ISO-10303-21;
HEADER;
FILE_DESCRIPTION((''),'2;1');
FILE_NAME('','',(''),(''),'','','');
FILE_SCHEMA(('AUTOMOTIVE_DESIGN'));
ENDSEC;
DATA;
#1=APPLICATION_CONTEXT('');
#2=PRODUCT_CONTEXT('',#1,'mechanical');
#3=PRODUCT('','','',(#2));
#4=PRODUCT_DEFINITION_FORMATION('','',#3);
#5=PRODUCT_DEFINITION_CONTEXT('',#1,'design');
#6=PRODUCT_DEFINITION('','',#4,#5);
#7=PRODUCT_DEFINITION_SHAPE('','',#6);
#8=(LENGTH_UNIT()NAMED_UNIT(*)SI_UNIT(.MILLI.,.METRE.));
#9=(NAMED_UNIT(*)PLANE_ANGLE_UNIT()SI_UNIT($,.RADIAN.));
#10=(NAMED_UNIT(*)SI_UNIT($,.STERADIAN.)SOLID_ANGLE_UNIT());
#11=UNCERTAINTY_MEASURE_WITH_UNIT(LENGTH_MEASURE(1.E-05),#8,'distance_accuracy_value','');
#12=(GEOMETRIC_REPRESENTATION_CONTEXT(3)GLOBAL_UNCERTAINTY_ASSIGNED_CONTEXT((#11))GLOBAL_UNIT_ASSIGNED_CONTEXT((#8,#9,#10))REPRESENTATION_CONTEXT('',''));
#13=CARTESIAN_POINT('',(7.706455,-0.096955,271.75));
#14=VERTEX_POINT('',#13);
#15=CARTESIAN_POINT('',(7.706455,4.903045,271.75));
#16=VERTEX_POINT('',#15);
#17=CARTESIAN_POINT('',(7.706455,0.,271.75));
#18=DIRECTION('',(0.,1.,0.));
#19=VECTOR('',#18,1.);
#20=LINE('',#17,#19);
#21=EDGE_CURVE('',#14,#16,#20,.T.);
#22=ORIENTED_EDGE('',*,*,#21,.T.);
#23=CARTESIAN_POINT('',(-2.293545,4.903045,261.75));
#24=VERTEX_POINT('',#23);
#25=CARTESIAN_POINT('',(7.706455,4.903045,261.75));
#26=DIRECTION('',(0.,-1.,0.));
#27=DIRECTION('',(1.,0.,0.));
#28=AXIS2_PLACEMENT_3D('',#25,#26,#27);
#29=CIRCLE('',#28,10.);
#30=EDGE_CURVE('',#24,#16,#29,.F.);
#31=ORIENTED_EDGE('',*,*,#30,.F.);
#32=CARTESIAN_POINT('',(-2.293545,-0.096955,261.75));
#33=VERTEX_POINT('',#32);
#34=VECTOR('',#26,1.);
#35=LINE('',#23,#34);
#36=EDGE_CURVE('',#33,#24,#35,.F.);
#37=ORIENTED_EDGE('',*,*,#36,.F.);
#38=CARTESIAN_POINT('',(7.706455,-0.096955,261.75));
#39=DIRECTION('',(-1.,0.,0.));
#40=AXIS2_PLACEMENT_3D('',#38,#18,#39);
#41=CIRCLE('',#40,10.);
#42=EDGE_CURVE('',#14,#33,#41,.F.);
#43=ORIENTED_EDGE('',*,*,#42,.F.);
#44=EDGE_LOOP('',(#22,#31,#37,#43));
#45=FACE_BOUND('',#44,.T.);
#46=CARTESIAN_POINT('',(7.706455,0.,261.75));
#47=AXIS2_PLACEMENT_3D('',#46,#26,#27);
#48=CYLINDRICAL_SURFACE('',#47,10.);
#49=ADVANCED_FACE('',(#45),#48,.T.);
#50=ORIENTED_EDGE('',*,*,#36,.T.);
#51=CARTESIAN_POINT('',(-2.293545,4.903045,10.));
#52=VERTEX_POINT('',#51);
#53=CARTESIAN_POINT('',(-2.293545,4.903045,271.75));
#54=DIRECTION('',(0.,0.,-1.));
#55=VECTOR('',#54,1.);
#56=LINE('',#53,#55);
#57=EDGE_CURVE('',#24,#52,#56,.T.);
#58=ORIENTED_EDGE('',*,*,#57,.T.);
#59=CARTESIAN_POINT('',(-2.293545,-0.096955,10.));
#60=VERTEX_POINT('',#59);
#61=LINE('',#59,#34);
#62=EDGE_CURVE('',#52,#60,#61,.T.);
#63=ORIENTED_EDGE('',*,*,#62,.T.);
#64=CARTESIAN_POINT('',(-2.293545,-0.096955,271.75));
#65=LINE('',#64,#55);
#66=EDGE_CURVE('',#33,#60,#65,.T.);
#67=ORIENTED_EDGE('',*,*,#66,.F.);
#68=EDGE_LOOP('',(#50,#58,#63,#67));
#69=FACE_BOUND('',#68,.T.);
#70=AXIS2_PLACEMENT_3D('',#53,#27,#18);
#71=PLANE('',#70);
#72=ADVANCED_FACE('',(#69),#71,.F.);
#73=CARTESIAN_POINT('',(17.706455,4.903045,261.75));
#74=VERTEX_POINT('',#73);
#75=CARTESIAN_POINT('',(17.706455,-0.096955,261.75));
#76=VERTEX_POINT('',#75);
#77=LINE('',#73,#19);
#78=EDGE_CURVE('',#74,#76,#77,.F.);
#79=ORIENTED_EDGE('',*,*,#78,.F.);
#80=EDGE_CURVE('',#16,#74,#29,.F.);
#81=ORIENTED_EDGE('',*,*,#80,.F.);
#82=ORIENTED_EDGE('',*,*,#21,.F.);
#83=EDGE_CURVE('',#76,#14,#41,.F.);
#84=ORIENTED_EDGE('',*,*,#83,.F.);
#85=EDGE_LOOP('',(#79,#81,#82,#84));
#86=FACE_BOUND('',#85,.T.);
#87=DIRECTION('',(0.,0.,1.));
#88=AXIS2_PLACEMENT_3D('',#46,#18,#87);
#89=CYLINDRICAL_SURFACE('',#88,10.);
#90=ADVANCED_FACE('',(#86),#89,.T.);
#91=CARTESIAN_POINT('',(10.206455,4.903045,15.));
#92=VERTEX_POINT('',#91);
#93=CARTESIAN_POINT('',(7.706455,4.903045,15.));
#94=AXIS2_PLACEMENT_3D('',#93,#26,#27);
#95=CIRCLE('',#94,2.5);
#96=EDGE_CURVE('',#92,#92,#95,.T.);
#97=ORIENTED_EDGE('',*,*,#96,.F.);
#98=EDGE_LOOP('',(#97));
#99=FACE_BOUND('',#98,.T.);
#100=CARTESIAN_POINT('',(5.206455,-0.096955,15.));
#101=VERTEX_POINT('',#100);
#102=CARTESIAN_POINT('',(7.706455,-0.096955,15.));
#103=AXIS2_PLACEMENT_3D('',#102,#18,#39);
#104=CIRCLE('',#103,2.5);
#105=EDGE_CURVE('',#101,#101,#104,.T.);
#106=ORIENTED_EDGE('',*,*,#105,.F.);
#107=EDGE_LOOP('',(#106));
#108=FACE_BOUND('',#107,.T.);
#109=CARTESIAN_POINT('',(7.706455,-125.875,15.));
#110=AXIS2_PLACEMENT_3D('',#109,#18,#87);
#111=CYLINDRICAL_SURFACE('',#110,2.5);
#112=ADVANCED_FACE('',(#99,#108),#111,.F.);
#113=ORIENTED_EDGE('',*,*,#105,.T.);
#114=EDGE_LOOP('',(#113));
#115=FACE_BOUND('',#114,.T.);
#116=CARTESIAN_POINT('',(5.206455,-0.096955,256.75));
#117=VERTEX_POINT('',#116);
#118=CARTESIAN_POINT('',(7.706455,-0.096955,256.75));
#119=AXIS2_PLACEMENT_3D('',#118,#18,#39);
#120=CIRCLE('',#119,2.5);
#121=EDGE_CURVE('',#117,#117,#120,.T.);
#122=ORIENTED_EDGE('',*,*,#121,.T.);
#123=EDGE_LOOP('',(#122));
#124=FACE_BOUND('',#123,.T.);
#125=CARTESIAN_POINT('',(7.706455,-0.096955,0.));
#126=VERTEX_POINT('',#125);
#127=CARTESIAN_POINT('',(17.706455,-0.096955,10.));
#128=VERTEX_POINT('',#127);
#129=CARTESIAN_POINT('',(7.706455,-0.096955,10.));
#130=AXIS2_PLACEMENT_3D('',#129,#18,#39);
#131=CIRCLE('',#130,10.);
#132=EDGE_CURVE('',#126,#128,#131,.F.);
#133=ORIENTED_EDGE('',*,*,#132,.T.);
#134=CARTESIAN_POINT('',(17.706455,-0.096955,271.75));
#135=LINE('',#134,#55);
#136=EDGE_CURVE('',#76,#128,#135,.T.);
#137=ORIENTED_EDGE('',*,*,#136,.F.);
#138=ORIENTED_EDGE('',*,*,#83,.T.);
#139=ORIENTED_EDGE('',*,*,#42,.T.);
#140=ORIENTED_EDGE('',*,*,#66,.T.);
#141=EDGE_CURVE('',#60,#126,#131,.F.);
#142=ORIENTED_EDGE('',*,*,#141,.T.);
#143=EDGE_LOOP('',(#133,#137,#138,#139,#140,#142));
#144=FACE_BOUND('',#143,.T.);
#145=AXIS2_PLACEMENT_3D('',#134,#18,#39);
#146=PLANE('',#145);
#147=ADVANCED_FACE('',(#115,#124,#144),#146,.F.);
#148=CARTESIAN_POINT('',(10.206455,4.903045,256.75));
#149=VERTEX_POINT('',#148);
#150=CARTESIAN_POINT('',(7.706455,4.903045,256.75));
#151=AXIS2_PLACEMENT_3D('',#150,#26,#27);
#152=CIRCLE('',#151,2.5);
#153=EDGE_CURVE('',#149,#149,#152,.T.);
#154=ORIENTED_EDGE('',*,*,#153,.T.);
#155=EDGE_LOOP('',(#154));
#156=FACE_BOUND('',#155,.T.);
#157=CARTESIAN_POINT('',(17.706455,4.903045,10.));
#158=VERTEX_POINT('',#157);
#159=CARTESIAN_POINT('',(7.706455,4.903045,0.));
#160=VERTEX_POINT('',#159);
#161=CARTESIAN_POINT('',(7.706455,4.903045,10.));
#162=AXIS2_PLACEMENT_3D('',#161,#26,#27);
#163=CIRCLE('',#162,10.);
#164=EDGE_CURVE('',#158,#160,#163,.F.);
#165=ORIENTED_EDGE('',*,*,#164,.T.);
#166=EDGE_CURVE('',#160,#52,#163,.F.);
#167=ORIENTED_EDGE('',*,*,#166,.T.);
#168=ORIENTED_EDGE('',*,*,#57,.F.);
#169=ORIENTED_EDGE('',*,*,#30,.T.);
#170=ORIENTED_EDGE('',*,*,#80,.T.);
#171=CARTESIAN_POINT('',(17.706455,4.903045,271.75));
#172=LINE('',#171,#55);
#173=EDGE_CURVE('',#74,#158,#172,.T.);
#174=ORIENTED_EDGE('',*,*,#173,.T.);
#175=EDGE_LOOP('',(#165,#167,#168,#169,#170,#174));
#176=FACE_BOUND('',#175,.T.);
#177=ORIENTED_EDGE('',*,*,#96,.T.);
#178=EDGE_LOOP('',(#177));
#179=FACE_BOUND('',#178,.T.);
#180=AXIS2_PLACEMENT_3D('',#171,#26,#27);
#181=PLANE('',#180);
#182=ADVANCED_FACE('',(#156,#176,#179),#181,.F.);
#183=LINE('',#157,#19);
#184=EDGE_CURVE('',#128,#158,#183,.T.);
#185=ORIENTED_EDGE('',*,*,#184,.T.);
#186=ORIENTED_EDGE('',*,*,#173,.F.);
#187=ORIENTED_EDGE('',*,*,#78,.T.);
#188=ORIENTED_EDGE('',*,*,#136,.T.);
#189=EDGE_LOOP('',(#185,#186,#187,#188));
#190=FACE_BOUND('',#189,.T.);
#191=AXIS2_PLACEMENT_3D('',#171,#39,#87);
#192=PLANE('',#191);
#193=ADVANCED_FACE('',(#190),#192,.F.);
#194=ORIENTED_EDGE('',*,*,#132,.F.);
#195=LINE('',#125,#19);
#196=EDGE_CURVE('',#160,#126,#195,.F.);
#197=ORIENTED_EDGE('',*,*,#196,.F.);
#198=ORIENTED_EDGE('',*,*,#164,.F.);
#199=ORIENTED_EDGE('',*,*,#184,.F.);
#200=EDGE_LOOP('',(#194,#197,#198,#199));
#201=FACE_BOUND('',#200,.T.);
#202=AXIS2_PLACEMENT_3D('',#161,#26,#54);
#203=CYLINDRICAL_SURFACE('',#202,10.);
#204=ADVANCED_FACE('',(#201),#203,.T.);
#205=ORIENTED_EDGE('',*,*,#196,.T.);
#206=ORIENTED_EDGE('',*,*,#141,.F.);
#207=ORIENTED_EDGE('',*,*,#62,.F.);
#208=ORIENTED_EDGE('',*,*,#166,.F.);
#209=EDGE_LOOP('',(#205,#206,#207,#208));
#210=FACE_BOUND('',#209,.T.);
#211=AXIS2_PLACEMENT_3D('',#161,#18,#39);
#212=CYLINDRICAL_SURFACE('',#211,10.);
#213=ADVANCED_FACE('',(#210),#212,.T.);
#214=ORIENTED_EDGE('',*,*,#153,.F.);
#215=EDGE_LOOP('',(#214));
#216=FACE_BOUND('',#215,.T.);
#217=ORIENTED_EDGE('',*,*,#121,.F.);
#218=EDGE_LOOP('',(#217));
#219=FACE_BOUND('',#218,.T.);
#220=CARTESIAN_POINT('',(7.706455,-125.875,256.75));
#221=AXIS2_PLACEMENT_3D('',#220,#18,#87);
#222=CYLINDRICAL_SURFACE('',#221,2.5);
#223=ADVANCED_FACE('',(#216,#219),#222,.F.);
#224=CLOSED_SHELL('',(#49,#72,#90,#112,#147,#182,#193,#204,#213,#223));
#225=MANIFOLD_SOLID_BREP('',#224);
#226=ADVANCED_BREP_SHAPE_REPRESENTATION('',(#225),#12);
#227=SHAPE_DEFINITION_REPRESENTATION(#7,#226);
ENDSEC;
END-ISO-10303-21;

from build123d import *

# Parameters (mm, degrees)
SKETCH_1_W          = 20
SKETCH_1_H          = 5
EXTRUDE_1_DEPTH     = 271.75
SKETCH_2_R          = 2.5
CUT_EXTRUDE_1_DEPTH = 125.875
FILLET_1_R          = 10


with BuildPart() as part:
    # 草图1 → 凸台-拉伸1 (new body)
    with BuildSketch(Plane.XY):
        with Locations((7.706454687, 2.403044524)):
            Rectangle(SKETCH_1_W, SKETCH_1_H)
    extrude(amount=EXTRUDE_1_DEPTH)

    # 草图2 → 切除-拉伸1 (cut, symmetric)
    with BuildSketch(Plane(origin=(0, 0, 0), x_dir=(1, 0, 0), z_dir=(0, 1, 0))):
        with Locations((7.706454687, -15)):
            Circle(SKETCH_2_R)
        with Locations((7.706454687, -256.75)):
            Circle(SKETCH_2_R)
    extrude(amount=CUT_EXTRUDE_1_DEPTH, both=True, mode=Mode.SUBTRACT)

    # 圆角1
    fillet_1_edges = [part.edges().sort_by_distance(p)[0] for p in [
        (-2.293545313, 2.403044524, 0),
        (17.706454687, 2.403044524, 0),
        (-2.293545313, 2.403044524, 271.75),
        (17.706454687, 2.403044524, 271.75),
    ]]
    fillet(fillet_1_edges, radius=FILLET_1_R - 0.0001)  # a hair under: the kernel refuses the full size


solid = part.part
